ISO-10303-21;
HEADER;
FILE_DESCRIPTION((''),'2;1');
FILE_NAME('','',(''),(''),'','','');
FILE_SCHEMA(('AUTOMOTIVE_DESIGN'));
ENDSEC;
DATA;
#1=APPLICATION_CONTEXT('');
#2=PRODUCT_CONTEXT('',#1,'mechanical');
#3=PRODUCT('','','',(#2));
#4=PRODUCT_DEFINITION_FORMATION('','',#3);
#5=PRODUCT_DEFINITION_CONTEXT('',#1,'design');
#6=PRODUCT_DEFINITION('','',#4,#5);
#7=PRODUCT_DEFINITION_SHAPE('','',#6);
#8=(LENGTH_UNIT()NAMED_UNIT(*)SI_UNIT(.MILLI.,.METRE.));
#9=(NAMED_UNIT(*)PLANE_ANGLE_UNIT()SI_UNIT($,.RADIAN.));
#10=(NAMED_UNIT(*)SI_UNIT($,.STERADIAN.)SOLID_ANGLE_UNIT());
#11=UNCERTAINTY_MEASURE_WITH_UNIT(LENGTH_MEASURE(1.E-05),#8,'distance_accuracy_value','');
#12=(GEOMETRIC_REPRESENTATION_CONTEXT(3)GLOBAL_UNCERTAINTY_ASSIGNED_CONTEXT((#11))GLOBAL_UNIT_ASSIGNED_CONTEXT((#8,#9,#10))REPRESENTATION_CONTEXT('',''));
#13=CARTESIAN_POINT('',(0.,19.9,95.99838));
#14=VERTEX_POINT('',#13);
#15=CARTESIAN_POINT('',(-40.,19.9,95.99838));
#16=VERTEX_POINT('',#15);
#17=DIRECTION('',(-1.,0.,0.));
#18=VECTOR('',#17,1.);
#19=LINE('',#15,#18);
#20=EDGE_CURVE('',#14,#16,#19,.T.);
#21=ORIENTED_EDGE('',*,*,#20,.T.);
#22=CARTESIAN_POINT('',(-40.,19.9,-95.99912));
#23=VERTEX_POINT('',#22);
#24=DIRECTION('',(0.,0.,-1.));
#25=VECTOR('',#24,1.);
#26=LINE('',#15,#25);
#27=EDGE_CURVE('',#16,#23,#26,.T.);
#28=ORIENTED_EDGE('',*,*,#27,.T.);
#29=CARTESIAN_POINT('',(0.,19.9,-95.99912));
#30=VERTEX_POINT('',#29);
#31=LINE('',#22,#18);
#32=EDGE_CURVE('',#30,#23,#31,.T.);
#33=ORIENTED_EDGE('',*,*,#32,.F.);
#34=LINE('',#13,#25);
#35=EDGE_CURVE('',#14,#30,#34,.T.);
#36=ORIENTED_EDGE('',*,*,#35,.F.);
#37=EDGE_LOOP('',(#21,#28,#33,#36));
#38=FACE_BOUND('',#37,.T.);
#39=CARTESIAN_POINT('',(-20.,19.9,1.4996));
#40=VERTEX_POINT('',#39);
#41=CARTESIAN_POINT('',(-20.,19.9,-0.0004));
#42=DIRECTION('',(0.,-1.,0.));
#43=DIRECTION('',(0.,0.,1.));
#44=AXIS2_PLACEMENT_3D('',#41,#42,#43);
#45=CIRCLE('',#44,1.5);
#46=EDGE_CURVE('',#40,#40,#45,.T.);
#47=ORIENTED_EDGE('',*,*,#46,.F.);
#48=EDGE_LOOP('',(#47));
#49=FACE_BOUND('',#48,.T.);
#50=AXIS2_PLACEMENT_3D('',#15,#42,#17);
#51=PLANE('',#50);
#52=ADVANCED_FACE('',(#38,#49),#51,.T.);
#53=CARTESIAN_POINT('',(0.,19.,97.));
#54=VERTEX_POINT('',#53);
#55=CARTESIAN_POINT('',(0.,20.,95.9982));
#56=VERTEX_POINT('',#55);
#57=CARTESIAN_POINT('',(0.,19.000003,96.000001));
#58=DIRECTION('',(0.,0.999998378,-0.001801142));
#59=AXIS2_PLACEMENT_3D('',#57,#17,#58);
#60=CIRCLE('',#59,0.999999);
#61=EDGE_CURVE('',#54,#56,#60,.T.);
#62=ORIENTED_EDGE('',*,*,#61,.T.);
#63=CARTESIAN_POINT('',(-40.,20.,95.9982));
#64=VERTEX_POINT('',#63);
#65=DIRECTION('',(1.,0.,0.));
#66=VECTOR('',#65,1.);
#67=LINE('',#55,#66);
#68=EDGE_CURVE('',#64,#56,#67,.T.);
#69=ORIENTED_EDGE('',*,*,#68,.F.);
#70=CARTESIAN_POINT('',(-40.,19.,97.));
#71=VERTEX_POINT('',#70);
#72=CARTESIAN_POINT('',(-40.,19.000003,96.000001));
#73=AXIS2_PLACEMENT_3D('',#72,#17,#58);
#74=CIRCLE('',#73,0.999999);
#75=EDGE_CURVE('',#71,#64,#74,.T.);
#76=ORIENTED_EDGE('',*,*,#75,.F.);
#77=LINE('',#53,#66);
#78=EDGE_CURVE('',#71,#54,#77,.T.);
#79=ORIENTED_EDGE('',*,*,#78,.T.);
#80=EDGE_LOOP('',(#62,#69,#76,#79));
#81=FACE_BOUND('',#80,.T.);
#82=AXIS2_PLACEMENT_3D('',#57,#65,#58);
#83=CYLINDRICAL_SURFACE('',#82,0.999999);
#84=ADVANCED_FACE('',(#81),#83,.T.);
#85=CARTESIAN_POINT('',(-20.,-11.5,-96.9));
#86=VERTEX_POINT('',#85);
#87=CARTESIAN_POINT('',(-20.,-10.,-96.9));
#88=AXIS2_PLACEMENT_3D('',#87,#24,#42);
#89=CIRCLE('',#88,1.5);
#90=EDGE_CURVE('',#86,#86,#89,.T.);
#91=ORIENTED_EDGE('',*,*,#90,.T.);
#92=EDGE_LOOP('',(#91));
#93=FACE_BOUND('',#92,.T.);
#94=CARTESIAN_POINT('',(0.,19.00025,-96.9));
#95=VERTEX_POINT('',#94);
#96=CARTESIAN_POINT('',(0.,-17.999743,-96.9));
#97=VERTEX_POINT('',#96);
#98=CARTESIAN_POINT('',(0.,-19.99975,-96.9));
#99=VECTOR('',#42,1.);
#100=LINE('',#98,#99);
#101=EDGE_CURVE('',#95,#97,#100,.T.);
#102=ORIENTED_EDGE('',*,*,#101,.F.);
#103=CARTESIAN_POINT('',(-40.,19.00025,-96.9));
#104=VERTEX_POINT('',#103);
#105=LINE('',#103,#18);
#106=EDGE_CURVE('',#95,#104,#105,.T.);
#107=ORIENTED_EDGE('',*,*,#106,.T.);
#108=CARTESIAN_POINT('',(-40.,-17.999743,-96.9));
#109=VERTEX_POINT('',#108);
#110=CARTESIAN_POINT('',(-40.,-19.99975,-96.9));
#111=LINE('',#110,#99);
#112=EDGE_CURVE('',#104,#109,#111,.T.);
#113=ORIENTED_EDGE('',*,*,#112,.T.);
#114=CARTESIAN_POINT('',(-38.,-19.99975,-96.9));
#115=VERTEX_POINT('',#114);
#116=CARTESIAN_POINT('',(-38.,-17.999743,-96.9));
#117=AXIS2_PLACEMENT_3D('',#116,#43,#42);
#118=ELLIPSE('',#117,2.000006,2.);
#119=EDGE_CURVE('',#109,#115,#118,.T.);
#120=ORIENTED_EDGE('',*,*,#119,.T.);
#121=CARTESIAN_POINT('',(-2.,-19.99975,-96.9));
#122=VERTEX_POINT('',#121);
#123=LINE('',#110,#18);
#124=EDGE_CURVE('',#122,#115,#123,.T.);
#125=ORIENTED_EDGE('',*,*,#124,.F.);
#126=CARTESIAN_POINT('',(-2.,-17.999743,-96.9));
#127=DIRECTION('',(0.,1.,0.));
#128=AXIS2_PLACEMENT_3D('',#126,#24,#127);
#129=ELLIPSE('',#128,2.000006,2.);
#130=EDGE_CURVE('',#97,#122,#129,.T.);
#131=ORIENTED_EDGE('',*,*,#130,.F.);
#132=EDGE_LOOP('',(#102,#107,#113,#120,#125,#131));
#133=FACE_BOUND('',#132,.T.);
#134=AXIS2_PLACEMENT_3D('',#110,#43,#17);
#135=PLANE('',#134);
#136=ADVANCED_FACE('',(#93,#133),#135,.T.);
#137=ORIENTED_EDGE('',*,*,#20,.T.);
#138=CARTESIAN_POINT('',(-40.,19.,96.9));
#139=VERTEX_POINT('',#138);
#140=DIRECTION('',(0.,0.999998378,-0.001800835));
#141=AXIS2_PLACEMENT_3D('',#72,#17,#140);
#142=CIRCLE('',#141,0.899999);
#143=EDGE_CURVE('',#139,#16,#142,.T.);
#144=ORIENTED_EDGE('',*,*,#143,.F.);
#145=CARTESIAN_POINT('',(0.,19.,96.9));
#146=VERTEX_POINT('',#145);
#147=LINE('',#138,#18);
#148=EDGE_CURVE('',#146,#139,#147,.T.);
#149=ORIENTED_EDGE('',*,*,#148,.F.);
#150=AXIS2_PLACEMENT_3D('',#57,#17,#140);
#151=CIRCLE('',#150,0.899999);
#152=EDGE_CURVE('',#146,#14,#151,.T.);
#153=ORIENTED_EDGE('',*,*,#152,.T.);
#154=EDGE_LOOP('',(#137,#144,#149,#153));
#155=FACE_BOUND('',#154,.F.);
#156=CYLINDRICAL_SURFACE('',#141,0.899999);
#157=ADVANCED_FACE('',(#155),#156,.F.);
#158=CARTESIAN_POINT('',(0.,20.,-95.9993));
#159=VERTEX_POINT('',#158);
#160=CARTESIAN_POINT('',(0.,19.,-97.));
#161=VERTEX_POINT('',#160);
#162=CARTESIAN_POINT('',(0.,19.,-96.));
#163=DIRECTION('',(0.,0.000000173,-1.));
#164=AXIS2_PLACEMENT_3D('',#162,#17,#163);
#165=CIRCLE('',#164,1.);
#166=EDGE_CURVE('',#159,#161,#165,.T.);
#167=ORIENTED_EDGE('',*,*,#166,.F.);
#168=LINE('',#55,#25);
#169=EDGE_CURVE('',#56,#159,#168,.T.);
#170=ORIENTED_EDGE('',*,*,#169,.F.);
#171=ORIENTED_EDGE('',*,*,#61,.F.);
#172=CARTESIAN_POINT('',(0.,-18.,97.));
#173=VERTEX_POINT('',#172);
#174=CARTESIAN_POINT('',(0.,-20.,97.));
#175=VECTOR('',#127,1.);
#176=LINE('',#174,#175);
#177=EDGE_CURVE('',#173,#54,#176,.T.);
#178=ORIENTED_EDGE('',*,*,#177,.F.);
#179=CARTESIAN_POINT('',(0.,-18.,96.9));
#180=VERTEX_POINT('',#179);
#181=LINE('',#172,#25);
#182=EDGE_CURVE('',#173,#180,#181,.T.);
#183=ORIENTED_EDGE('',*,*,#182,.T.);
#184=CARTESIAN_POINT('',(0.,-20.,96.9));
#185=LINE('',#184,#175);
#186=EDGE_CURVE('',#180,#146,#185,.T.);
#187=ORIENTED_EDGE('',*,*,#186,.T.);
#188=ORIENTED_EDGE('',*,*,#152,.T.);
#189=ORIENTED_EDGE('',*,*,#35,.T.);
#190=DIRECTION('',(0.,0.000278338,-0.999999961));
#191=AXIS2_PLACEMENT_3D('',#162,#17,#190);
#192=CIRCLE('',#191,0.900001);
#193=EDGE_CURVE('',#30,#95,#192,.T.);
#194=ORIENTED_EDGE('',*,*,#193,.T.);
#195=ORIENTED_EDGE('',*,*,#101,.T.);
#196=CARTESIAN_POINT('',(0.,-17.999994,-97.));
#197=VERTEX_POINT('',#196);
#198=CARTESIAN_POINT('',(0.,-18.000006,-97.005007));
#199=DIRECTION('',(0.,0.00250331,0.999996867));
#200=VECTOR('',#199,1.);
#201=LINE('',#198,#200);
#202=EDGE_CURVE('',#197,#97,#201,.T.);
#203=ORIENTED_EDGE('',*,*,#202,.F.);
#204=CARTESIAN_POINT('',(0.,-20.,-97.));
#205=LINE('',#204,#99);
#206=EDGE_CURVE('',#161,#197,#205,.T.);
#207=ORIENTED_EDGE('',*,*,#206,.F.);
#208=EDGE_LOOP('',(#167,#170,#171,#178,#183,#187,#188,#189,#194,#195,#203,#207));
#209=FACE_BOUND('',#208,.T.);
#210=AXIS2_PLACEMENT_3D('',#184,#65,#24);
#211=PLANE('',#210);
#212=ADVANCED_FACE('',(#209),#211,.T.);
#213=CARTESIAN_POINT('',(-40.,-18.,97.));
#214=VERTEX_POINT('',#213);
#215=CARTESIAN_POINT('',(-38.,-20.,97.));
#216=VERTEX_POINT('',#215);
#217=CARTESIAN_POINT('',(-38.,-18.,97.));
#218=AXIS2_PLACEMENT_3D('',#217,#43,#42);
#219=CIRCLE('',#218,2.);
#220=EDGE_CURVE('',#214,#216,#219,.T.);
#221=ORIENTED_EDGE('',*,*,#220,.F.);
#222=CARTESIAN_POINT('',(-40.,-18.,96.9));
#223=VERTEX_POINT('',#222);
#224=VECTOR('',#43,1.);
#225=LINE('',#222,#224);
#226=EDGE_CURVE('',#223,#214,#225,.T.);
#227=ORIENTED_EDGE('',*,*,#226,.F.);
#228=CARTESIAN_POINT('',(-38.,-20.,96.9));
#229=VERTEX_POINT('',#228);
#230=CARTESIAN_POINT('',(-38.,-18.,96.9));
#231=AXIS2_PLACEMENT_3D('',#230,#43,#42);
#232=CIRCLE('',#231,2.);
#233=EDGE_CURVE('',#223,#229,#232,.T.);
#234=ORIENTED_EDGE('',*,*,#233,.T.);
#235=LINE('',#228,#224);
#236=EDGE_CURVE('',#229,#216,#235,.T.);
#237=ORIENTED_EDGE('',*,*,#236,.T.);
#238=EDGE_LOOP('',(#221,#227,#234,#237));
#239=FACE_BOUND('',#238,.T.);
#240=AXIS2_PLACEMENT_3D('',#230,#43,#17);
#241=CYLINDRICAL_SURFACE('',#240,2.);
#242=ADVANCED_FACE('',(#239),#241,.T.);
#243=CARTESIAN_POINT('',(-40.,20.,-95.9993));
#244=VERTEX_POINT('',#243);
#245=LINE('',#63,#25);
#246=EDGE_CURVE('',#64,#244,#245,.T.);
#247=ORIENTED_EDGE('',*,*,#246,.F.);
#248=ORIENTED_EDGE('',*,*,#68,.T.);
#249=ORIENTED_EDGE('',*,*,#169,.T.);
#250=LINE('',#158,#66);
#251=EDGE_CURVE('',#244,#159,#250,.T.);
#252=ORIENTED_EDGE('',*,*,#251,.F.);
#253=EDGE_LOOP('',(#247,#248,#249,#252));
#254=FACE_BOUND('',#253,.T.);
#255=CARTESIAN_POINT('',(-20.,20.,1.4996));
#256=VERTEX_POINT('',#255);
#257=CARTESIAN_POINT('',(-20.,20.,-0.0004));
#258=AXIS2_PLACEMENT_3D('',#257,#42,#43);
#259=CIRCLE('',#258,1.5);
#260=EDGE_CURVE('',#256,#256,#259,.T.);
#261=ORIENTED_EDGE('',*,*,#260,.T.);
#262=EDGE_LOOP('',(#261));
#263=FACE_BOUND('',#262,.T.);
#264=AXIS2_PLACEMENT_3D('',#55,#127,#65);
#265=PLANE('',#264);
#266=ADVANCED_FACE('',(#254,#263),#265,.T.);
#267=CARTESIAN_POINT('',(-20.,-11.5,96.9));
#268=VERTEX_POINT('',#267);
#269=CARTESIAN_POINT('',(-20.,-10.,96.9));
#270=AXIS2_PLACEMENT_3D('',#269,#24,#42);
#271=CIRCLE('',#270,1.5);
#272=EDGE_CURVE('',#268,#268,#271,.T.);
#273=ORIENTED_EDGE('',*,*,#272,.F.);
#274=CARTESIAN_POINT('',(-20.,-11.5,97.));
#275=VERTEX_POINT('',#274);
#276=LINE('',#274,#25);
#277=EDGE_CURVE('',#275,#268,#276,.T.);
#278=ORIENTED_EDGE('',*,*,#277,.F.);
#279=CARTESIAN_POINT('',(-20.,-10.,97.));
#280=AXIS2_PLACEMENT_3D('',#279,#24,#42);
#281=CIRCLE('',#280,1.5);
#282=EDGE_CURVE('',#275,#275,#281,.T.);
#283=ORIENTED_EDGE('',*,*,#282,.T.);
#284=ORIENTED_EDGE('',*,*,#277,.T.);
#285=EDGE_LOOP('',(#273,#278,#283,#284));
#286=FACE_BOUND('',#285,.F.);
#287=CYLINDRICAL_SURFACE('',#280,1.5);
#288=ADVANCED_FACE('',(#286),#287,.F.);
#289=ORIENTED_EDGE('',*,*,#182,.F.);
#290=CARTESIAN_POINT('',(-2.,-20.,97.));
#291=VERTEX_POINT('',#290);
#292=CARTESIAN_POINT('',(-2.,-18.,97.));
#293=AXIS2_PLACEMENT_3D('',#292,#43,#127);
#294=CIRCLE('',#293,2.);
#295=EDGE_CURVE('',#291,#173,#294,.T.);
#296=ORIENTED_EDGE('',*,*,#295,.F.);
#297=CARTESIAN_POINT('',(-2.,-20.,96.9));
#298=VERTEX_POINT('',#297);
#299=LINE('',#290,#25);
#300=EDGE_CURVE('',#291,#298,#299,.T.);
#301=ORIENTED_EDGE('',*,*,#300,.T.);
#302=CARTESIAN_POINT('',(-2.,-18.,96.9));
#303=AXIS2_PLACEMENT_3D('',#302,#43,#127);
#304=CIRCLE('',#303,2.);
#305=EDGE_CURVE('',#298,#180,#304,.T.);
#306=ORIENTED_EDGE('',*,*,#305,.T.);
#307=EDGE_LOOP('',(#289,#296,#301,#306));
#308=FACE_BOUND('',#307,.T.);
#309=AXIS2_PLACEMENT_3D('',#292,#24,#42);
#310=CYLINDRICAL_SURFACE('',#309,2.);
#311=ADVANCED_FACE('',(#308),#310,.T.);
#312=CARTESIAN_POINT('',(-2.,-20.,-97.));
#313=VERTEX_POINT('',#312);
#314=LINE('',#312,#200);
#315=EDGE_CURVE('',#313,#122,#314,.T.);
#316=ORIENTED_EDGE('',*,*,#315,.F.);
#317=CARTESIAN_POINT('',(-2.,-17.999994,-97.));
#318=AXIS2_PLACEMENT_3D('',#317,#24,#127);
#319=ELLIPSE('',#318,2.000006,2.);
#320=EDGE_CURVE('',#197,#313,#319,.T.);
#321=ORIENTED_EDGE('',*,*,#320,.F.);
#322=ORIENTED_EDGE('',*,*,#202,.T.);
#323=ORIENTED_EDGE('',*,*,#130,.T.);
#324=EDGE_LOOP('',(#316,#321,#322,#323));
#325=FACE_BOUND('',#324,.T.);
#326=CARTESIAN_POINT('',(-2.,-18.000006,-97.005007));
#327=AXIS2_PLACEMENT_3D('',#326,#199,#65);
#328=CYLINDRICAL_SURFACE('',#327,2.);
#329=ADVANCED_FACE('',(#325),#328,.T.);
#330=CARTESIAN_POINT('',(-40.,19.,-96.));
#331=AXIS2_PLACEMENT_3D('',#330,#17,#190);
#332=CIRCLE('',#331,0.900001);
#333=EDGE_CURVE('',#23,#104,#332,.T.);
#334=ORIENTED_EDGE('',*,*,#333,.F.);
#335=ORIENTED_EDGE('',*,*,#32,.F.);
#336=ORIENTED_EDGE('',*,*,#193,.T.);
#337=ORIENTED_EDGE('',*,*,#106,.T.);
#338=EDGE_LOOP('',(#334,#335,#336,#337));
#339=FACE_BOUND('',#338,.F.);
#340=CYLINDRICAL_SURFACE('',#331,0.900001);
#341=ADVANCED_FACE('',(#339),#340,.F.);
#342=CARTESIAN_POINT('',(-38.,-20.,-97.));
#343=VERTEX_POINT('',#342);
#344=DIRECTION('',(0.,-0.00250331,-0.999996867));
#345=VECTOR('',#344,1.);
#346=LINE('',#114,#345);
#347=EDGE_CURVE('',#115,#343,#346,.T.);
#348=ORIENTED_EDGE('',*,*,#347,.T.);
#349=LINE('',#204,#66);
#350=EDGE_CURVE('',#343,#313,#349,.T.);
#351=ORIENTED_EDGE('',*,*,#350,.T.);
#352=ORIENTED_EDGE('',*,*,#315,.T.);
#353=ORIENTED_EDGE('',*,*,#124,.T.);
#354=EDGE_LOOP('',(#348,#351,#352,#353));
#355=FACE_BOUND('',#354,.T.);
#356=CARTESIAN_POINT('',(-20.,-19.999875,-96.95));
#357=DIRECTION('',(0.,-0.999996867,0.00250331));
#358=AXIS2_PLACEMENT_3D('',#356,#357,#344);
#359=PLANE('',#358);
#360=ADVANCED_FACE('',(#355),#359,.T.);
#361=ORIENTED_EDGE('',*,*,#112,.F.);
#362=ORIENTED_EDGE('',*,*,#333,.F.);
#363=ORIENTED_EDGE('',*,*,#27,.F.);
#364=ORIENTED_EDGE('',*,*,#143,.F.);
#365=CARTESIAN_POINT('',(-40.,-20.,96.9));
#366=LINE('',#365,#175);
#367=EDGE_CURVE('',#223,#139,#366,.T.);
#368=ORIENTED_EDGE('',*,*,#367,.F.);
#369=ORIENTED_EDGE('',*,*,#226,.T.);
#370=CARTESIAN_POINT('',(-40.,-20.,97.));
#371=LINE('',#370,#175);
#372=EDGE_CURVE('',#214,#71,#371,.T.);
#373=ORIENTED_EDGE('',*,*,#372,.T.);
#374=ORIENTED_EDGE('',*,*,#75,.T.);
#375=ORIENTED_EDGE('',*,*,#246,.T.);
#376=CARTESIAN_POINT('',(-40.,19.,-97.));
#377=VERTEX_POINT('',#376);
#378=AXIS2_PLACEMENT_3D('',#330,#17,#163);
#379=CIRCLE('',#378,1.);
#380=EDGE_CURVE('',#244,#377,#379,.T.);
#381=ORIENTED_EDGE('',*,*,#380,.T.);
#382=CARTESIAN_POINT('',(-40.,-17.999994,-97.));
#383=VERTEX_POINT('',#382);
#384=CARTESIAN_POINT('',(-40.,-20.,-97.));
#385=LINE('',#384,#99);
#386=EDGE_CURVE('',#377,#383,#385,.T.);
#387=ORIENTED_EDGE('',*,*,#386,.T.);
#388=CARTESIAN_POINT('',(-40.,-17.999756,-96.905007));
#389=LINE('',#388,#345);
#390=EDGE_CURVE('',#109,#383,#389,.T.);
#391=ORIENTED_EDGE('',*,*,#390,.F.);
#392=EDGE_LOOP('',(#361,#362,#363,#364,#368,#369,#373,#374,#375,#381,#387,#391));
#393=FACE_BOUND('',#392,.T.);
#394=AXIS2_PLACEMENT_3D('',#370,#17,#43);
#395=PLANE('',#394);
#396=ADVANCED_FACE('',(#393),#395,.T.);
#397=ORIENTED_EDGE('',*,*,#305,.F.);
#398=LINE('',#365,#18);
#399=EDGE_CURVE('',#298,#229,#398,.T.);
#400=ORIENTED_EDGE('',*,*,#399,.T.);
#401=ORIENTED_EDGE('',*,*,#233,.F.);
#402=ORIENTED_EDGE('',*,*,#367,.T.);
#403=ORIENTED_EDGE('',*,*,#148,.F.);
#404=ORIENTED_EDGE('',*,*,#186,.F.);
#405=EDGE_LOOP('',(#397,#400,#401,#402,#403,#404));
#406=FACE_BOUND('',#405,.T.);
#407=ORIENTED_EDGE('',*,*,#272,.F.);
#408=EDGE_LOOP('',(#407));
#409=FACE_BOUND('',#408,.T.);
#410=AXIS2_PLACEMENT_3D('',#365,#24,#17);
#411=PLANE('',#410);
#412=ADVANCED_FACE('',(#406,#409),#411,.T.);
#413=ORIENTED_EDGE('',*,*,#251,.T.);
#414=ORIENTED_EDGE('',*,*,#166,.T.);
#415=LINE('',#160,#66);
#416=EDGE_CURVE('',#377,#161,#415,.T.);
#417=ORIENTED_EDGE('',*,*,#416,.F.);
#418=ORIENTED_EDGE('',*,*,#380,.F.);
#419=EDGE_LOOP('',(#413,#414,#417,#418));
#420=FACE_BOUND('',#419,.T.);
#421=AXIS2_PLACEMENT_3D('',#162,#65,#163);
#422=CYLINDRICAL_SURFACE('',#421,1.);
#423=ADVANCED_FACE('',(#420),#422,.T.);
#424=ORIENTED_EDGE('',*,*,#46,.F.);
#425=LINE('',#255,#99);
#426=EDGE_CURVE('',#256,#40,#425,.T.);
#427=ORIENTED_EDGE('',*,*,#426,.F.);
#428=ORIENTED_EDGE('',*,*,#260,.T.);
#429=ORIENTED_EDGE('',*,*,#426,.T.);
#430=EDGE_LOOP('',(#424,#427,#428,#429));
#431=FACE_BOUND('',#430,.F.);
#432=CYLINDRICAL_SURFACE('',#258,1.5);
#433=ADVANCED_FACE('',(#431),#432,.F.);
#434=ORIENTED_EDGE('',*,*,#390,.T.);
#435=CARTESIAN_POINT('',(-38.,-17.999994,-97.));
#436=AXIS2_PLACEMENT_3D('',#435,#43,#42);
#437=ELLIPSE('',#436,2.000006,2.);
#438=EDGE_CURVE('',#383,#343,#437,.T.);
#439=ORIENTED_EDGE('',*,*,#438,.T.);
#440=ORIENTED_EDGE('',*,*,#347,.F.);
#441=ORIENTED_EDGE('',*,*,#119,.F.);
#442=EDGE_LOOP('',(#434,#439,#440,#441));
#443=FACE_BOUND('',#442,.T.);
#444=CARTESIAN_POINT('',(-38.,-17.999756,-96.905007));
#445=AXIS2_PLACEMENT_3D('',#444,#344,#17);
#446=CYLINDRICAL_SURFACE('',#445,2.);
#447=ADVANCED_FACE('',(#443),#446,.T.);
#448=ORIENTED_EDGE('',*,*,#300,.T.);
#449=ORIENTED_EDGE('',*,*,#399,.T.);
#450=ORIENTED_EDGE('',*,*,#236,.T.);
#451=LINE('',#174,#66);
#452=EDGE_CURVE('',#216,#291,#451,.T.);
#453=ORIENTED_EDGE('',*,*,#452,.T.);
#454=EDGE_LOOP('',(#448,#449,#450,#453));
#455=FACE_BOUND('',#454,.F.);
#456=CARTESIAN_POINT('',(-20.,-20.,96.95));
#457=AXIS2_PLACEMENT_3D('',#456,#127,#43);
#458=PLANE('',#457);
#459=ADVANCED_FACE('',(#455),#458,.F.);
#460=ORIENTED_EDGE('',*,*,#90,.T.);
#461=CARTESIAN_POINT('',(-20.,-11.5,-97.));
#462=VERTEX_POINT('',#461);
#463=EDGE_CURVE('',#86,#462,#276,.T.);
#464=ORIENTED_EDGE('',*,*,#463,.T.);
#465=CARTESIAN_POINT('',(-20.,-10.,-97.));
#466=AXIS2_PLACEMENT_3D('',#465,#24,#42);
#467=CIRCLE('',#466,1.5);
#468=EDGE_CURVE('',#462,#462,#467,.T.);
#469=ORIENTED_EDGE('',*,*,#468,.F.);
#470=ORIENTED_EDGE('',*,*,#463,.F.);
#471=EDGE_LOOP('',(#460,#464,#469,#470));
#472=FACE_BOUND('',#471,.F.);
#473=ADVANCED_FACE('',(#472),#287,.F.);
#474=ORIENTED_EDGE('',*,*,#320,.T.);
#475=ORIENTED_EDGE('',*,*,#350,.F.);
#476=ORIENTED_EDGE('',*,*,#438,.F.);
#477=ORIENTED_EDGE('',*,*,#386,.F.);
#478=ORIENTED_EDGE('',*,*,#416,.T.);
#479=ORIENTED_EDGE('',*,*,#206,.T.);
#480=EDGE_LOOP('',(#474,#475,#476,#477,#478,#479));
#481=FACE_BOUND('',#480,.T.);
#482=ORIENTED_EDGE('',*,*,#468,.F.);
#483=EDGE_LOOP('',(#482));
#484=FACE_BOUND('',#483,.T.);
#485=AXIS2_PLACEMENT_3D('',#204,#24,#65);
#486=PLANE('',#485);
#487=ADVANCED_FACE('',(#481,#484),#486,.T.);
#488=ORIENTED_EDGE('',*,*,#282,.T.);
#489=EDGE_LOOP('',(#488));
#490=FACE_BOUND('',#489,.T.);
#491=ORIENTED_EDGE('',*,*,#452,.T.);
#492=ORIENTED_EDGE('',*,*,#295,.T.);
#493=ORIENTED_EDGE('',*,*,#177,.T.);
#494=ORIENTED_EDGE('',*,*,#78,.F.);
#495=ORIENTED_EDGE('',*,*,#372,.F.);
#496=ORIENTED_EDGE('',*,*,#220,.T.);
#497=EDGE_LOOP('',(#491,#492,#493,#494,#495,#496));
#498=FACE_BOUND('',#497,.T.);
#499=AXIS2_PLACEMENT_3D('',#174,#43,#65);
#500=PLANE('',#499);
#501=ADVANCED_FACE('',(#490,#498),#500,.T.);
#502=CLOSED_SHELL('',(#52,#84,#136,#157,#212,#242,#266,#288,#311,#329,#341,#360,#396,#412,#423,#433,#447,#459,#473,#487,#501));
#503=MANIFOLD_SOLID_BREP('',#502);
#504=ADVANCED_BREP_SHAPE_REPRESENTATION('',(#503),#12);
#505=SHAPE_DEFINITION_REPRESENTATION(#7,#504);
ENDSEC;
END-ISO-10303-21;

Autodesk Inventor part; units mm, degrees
ref_plane "YZ Plane" through (0, 0, 0) normal (1, 0, 0) x (0, 1, 0)
ref_plane "XY Plane" through (0, 0, 0) normal (0, 0, 1) x (1, 0, 0)
sketch "Sketch1" plane through (0, 0, 0) normal (1, 0, 0) x (0, 1, 0)
  line L0 (20, 97) -> (-20, 97) construction
  line L1 (-20, 97) -> (-20, -97) construction
  line L2 (-20, -97) -> (20, -97) construction
  line L3 (20, -97) -> (20, 97) construction
  line L4 (20, 97) -> (-20, -97) construction
  line L5 (-20, 97) -> (20, -97) construction
  line L6 (-20, 97) -> (19, 97)
  line L7 (-20, -97) -> (19, -97)
  arc A0 (20, 95.9982) -> (19, 97) centre (19, 96) ccw
  arc A1 (19, -97) -> (20, -95.9993) centre (19, -96) ccw
  line L8 (20, 95.9982) -> (20, -95.9993)
  point P0 (0, 0)
  dimension "d0" = 40
  dimension "d1" = 194
  dimension "d2" = 39
  dimension "d3" = 39
ref_plane "Work Plane1" through (0, -20, 97) normal (0, 1, 0) x (-1, 0, 0)
sketch "Sketch2" plane through (0, -20, 97) normal (0, 1, 0) x (-1, 0, 0)
  line L0 (0, 0) -> (40, 0)
  line L1 (40, 0) -> (40, -0.1)
  line L2 (40, -0.1) -> (0, -0.1)
  line L3 (0, -0.1) -> (0, 0)
  point P0 (0, -97)
  dimension "d4" = 40
  dimension "d5" = 0.1
sweep "Sweep1" add profiles "Sketch2" path "Sketch1"
sketch "Sketch3" plane through (-40, 20, 95.9982) normal (0, 1, 0) x (1, 0, 0)
  line L0 (0, -0.0002) -> (0, 191.9975) construction
  line L1 (40, 0) -> (40, -1.0018) construction
  line L2 (0, 191.9975) -> (40, 0) construction
  line L3 (40, -0.0002) -> (40, 191.9975) construction
  line L4 (40, 191.9975) -> (0, -0.0002) construction
  point P0 (40, 95.9982)
  point P1 (20, 95.9987)
hole "Hole1" at (-20, 20, -0.0004) direction (0, -1, 0) diameter 3 end through all
fillet "Fillet1" radius 2 4 edges at (0, -20, 96.95) (0, -19.9999, -96.95) (-40, -20, 96.95) (-40, -19.9999, -96.95)
sketch "Sketch4" plane through (-40, 19, 97) normal (0, 0, 1) x (1, 0, 0)
  line L0 (0, -37) -> (0, 0) projected
  line L1 (38, -39) -> (2, -39) projected
  point P0 (40, -19)
  point P1 (20, -29)
  dimension "d16" = 20
  dimension "d17" = 10
hole "Hole2" at (-20, -10, 97) direction (0, 0, -1) diameter 3 end through all
equation "\"d3\" = d2"
properties material "Iron, Malleable"
